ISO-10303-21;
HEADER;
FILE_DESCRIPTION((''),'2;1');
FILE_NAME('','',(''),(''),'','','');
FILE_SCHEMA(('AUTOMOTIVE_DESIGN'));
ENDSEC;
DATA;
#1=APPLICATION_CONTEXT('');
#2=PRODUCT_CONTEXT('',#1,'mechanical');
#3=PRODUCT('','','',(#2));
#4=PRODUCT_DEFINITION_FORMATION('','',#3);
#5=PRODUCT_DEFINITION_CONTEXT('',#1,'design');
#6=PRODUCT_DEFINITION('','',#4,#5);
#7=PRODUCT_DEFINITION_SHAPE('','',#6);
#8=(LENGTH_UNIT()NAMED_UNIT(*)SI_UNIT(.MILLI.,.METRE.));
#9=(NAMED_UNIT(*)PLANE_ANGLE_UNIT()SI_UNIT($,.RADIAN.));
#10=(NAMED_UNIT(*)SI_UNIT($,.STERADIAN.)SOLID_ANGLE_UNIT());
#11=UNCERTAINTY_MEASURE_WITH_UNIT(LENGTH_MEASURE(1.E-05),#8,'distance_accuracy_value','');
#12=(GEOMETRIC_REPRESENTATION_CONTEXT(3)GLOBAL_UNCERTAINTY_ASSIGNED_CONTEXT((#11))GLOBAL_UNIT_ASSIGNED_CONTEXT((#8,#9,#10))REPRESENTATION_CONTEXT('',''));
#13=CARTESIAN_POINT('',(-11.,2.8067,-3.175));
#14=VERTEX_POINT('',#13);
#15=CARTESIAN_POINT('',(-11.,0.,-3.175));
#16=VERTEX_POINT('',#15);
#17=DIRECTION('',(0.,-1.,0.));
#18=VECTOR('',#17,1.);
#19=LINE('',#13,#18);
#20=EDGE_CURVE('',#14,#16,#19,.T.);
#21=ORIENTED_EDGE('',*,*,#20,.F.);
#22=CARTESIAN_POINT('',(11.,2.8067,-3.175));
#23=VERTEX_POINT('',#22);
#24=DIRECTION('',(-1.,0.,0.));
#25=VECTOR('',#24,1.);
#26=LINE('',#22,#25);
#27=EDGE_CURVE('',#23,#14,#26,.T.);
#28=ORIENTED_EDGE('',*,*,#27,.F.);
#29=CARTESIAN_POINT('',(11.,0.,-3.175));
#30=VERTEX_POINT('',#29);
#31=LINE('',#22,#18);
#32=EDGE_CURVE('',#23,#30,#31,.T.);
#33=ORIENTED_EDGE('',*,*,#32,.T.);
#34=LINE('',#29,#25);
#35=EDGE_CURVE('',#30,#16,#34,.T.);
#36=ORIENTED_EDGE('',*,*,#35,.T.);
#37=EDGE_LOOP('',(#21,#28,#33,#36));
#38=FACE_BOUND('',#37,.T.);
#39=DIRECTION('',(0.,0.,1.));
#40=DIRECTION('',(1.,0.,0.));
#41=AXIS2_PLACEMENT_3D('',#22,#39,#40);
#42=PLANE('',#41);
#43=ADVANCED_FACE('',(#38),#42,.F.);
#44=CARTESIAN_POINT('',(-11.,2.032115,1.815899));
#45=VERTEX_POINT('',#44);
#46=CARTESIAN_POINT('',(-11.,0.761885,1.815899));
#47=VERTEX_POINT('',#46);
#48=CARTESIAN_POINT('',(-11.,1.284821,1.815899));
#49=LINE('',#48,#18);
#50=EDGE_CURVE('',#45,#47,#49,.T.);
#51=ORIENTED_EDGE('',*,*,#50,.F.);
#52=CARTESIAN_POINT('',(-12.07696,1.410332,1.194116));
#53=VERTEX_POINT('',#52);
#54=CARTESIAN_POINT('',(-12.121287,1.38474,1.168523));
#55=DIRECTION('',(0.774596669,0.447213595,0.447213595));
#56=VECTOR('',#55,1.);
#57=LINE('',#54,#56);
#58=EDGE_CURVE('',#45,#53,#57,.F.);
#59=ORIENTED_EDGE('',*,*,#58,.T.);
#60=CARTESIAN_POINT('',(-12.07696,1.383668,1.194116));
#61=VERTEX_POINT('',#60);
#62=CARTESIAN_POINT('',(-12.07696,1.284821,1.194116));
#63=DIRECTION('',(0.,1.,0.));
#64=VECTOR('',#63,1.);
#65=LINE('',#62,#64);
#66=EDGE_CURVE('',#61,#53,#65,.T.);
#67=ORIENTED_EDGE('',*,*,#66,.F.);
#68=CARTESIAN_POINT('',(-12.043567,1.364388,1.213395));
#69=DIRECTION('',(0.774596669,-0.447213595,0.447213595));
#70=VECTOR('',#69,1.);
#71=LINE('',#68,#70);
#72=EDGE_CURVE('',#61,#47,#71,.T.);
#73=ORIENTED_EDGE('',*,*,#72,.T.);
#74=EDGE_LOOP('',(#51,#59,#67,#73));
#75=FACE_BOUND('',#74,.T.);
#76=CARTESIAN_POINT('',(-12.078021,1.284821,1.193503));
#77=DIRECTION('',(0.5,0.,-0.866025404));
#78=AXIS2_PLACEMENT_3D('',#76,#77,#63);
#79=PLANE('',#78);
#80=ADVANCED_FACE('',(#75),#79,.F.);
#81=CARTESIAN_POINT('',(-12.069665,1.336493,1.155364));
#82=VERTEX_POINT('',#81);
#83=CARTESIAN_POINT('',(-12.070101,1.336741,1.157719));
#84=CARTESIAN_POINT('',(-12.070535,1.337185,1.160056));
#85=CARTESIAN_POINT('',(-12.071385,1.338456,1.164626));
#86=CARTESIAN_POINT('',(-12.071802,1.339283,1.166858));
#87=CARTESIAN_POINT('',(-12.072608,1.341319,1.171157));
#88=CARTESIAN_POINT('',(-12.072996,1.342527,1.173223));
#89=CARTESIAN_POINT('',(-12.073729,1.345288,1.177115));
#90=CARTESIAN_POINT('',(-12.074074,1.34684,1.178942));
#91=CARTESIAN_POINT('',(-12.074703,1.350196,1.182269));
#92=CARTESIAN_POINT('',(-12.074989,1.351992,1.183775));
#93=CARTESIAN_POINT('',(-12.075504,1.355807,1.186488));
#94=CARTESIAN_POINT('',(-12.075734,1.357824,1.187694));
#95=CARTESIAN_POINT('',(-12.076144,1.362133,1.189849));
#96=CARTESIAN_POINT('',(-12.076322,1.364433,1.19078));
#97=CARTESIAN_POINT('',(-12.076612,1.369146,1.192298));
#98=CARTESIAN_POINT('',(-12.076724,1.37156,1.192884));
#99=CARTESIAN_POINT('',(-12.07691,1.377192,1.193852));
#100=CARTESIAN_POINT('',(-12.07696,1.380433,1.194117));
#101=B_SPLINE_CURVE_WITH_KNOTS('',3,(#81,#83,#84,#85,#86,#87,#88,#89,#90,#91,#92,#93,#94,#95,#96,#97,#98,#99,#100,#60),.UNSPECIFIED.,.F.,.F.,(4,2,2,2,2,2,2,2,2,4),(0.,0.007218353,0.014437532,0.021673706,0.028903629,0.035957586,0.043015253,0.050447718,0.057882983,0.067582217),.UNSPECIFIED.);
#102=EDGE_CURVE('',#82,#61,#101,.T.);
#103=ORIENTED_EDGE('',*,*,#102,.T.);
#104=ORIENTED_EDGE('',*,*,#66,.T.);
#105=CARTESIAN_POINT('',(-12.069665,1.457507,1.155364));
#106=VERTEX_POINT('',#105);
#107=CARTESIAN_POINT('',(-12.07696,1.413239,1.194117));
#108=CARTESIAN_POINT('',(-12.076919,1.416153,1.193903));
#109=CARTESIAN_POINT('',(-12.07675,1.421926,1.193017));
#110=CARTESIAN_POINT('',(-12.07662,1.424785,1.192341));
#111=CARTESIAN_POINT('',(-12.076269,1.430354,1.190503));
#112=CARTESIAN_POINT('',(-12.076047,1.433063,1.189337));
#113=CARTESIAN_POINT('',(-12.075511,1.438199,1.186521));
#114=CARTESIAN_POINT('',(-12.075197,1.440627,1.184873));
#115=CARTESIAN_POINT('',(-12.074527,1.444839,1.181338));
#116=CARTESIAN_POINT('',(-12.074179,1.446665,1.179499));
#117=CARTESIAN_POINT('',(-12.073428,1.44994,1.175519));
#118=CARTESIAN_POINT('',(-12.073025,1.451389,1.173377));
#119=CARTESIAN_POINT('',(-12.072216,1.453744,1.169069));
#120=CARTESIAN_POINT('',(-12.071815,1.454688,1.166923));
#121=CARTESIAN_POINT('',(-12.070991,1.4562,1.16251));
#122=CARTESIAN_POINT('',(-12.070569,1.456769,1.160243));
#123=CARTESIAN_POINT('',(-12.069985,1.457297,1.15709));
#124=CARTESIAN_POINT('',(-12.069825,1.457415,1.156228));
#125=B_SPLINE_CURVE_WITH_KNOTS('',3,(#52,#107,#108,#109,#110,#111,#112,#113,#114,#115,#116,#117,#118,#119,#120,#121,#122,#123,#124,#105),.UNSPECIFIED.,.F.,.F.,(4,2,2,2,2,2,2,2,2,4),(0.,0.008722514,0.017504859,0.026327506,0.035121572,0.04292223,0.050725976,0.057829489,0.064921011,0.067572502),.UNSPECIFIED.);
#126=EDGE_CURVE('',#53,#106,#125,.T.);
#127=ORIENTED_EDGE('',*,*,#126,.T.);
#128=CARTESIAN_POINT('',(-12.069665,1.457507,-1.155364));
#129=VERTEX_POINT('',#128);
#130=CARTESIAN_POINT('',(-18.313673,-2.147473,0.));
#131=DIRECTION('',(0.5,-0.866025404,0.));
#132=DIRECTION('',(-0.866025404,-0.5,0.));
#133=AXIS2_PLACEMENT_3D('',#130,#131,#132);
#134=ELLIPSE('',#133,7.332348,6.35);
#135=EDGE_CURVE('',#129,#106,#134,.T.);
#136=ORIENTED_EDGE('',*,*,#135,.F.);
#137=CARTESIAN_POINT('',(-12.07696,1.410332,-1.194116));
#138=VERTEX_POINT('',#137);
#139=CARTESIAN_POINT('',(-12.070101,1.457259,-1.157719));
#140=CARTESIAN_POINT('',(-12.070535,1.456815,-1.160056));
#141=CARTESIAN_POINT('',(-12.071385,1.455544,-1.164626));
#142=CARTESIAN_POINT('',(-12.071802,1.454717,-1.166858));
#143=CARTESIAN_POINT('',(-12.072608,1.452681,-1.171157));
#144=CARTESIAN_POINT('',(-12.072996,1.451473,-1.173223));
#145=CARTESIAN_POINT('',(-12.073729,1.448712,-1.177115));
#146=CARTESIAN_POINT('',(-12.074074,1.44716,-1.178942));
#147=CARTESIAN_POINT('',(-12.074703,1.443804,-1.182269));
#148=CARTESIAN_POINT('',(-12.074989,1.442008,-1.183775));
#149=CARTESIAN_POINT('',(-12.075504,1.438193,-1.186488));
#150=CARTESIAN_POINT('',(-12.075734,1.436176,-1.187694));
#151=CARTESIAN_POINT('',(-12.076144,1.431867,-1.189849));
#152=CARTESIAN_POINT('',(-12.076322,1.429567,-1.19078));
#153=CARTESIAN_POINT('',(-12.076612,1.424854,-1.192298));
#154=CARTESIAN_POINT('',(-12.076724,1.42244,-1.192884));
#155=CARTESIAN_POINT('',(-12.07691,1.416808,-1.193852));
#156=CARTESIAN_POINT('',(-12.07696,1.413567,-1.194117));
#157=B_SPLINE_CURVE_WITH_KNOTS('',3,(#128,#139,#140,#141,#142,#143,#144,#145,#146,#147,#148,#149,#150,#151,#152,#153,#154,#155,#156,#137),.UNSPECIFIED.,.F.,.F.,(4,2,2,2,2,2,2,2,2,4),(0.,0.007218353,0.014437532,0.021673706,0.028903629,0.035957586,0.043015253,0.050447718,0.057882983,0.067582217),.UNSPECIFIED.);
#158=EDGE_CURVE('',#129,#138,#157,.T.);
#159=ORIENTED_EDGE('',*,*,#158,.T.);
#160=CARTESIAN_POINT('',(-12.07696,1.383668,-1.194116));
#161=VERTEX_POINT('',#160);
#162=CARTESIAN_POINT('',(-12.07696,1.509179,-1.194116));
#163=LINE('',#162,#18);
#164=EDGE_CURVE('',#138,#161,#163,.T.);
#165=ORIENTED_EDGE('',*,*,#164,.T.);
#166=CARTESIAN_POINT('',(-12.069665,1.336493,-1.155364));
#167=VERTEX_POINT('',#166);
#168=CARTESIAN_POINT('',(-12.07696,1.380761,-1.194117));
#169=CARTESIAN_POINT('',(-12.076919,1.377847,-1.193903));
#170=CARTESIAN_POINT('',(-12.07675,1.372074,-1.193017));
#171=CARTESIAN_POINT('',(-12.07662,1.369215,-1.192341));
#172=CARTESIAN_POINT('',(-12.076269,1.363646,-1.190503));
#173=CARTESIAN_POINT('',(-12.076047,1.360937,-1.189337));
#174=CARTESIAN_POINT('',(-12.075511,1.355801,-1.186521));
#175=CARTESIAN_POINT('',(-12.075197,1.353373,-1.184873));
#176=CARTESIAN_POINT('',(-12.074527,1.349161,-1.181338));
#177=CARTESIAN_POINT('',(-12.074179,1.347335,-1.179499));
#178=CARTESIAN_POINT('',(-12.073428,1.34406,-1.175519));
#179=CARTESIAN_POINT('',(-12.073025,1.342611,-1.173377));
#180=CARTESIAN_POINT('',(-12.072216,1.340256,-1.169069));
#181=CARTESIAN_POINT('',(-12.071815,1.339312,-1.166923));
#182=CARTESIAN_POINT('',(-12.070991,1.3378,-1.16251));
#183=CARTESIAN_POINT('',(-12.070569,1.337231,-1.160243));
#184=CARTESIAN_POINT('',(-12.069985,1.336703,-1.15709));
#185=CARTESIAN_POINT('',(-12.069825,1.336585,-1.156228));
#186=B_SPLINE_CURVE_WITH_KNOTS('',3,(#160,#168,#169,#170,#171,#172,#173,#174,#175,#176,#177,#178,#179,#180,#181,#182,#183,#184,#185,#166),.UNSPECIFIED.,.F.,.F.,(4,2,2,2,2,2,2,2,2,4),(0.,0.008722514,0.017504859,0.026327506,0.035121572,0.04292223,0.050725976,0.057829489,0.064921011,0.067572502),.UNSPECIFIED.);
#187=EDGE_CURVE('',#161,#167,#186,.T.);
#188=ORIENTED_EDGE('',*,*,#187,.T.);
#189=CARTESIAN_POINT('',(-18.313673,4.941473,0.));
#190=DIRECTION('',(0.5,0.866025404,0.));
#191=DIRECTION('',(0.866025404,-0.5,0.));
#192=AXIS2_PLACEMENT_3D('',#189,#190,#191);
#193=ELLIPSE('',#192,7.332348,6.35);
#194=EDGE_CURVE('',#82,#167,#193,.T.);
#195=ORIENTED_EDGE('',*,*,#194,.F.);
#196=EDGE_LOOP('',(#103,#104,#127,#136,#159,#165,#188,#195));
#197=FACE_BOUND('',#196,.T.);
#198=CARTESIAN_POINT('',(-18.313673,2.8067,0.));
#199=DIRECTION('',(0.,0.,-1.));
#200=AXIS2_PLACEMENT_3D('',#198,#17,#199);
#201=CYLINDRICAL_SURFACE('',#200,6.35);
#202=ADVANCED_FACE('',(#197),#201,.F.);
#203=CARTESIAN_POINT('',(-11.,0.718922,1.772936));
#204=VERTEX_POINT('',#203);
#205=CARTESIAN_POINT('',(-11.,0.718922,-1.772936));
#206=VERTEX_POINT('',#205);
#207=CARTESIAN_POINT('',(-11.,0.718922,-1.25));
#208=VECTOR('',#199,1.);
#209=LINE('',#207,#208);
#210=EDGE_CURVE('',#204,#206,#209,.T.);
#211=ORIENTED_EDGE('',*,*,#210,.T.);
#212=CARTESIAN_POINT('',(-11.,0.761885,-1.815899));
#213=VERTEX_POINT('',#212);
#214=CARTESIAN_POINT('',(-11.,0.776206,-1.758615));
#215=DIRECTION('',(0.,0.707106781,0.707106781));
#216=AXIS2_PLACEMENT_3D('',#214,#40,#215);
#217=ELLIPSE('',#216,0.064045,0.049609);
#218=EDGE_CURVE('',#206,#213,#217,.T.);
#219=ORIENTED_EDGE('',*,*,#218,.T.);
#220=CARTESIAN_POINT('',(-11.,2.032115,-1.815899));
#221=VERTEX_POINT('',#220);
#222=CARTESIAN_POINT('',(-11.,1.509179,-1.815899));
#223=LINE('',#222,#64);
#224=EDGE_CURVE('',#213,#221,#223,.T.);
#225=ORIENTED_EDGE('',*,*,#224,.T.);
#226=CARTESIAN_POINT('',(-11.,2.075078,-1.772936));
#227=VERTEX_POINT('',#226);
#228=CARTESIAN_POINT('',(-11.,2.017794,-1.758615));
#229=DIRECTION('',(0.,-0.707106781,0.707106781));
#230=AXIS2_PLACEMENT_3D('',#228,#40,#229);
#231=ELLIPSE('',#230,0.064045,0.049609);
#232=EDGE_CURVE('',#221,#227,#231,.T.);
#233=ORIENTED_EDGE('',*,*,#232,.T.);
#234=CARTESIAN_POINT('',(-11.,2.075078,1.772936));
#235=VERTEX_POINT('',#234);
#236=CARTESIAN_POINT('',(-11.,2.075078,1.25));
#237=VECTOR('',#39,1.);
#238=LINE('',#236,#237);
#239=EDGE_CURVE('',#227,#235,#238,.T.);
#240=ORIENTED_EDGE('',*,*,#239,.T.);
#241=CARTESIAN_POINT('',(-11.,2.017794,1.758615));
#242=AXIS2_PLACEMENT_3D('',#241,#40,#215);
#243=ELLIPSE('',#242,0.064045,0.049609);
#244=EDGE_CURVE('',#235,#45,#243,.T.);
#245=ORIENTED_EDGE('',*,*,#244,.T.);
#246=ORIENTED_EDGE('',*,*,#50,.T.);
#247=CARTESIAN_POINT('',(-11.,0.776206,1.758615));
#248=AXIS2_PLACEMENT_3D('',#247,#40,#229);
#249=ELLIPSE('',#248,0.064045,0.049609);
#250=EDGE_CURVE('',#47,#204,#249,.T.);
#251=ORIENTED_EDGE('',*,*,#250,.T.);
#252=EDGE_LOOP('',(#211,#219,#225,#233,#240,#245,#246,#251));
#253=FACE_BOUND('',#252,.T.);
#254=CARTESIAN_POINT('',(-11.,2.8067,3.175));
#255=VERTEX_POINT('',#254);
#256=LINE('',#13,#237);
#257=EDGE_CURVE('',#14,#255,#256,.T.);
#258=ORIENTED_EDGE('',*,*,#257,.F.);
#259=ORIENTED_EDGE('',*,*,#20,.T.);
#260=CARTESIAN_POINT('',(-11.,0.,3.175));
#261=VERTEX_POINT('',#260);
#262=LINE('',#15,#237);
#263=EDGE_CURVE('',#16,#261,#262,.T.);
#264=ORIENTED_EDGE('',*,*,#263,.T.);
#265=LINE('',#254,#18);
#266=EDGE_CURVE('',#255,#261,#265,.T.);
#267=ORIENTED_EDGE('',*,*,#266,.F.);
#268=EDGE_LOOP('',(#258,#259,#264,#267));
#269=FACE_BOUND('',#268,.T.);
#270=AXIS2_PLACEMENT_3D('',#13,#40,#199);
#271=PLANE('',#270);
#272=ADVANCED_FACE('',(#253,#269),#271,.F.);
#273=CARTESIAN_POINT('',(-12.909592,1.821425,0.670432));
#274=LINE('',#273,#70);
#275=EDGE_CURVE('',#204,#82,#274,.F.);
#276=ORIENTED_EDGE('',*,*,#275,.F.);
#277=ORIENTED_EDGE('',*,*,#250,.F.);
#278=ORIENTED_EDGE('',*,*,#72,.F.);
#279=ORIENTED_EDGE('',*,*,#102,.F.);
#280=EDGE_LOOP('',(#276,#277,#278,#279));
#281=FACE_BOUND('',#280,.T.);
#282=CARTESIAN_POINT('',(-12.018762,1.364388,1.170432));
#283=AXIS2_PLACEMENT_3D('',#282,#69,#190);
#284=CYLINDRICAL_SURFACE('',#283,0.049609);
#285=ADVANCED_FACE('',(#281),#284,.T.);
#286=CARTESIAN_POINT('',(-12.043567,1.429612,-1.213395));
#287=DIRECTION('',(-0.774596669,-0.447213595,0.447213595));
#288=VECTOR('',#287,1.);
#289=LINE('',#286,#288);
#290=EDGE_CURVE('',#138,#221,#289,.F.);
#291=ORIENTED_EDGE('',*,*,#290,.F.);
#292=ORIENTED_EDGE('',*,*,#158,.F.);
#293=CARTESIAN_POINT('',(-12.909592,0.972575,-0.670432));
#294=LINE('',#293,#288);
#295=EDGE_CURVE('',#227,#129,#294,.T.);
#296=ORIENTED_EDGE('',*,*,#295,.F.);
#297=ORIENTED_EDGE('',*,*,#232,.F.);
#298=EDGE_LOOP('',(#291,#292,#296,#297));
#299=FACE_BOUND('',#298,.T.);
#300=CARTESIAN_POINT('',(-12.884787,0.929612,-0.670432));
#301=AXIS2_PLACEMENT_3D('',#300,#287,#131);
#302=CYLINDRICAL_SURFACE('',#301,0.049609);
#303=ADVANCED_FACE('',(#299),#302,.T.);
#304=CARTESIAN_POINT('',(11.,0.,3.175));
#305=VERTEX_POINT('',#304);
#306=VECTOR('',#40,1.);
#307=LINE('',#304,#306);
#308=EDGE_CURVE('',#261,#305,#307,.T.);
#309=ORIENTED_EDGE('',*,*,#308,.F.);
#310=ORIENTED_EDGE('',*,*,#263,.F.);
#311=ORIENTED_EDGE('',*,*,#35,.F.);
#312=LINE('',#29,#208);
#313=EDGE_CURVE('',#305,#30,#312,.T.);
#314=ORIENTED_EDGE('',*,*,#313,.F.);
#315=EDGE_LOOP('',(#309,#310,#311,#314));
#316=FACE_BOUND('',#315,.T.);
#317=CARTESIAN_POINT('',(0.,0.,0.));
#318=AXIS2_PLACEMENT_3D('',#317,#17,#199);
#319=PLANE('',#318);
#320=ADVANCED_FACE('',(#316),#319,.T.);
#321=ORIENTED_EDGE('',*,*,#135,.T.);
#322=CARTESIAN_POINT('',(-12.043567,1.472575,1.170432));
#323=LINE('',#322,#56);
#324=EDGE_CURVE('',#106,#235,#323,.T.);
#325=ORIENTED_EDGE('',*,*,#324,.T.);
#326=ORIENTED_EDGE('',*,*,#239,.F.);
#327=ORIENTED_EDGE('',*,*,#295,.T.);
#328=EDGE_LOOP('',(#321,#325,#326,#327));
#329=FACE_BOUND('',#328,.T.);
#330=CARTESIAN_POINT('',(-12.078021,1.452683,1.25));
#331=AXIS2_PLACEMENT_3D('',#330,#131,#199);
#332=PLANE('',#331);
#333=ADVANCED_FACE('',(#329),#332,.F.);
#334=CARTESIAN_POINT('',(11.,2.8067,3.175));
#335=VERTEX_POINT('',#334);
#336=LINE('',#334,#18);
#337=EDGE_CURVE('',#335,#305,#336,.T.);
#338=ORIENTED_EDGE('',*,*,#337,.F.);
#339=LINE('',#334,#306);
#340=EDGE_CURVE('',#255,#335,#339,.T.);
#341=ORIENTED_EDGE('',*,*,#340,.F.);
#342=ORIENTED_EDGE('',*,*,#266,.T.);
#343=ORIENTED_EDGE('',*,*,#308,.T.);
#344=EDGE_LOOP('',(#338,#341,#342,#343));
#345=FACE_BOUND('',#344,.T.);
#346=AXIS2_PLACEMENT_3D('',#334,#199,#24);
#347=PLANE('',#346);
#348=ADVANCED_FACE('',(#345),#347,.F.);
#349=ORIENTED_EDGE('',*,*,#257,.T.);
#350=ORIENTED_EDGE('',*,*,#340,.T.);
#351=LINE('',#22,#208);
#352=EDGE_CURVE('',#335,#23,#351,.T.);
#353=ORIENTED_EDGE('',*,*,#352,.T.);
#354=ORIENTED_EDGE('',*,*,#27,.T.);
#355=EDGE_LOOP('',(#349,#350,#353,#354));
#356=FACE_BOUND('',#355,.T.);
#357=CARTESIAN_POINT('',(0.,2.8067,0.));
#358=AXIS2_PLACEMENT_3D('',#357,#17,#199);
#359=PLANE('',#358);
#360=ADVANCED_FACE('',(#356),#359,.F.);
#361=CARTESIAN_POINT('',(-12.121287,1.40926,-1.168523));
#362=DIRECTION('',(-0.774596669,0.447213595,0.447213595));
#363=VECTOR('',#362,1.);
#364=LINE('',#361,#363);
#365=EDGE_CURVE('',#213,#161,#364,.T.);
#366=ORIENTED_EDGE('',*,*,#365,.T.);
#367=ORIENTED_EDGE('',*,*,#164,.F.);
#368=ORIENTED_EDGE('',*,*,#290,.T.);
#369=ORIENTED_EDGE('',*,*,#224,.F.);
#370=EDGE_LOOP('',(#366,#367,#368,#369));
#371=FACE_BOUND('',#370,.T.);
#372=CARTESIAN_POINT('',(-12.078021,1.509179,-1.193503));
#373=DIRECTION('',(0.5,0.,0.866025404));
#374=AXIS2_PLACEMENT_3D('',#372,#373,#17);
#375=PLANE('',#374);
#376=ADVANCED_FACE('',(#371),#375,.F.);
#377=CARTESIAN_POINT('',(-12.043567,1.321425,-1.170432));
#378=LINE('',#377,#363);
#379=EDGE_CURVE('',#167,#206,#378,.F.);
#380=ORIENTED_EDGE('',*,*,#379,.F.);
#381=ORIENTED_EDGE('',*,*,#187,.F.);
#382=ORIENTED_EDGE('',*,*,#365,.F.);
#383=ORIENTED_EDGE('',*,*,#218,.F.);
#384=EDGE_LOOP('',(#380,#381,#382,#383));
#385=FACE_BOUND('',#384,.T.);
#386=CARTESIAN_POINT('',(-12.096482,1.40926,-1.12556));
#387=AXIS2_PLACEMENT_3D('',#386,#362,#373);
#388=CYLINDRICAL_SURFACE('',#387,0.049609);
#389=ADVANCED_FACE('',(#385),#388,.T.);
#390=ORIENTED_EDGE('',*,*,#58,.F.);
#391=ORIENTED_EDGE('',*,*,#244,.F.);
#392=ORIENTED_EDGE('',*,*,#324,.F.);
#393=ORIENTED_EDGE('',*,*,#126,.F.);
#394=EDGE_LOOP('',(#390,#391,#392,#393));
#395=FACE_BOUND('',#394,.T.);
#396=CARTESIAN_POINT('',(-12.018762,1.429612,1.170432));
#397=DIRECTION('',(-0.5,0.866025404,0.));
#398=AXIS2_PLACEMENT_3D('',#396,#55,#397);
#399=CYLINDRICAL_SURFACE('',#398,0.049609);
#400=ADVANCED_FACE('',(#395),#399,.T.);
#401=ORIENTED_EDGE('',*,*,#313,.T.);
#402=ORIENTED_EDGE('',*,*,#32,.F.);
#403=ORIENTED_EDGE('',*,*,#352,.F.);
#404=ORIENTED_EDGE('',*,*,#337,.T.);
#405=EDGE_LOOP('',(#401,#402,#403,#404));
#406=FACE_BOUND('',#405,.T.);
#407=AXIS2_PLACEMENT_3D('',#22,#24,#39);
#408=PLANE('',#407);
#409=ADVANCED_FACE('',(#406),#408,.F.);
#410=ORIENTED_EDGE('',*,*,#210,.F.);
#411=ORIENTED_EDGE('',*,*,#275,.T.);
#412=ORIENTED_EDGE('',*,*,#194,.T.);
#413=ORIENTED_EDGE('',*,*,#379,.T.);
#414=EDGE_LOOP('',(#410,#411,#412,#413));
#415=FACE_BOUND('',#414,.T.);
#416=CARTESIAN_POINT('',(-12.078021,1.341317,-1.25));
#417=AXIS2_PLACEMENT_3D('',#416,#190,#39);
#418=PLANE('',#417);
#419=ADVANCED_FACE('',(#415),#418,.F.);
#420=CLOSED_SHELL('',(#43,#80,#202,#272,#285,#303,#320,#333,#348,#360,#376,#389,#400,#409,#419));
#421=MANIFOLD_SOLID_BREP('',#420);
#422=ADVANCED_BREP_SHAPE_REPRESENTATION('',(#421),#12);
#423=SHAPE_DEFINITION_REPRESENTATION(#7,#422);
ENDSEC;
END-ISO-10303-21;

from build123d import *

# Parameters (mm, degrees)
CROQUIS1_W              = 22
CROQUIS1_H              = 6.35
SALIENTE_EXTRUIR1_DEPTH = 2.8067
CROQUIS2_W              = 2.5
CROQUIS2_H              = 0.224358974
SALIENTE_EXTRUIR2_DEPTH = 1.07696
SALIENTE_EXTRUIR2_TAPER = 3
REDONDEO1_R             = 0.049609375
CORTAR_EXTRUIR1_DEPTH   = 13.798873245


with BuildPart() as part:
    # Croquis1 → Saliente-Extruir1 (new body)
    with BuildSketch(Plane(origin=(0, 0, 0), x_dir=(1, 0, 0), z_dir=(0, 1, 0))):
        Rectangle(CROQUIS1_W, CROQUIS1_H)
    extrude(amount=SALIENTE_EXTRUIR1_DEPTH)

    # Croquis2 → Saliente-Extruir2 (add)
    with BuildSketch(Plane.ZY.offset(11)):
        with Locations((0, 1.397)):
            Rectangle(CROQUIS2_W, CROQUIS2_H)
    extrude(amount=SALIENTE_EXTRUIR2_DEPTH, taper=SALIENTE_EXTRUIR2_TAPER)

    # Chaflán1: read off the stored shape, not the designer's step
    # Chaflán1: loft between two sections, ruled curve by curve
    chafl_n1_from = [
        Edge.make_line((-12.07696, 1.34070485, -1.194115663), (-12.07696, 1.34070485, 1.194115663)),
        Edge.make_line((-12.07696, 1.34070485, 1.194115663), (-12.07696, 1.45329515, 1.194115663)),
        Edge.make_line((-12.07696, 1.34070485, -1.194115663), (-12.07696, 1.45329515, -1.194115663)),
        Edge.make_line((-12.07696, 1.45329515, 1.194115663), (-12.07696, 1.45329515, -1.194115663)),
    ]
    chafl_n1_to = [
        Edge.make_line((-11, 0.718921704, -1.815898809), (-11, 0.718921704, 1.815898809)),
        Edge.make_line((-11, 0.718921704, 1.815898809), (-11, 2.075078296, 1.815898809)),
        Edge.make_line((-11, 0.718921704, -1.815898809), (-11, 2.075078296, -1.815898809)),
        Edge.make_line((-11, 2.075078296, 1.815898809), (-11, 2.075078296, -1.815898809)),
    ]
    chafl_n1 = Solid(Shell([*[Face.make_surface_from_curves(chafl_n1_from[k], chafl_n1_to[k]) for k in range(4)], Face(Wire(chafl_n1_from)), Face(Wire(chafl_n1_to))]))
    add(chafl_n1)

    # Redondeo1
    redondeo1_edges = [part.edges().sort_by_distance(p)[0] for p in [
        (-11.53848, 1.029813277, 1.505007236),
        (-11.53848, 1.029813277, -1.505007236),
        (-11.53848, 1.764186723, 1.505007236),
        (-11.53848, 1.764186723, -1.505007236),
    ]]
    fillet(redondeo1_edges, radius=REDONDEO1_R)

    # Croquis4 → Cortar-Extruir1 (cut, through all)
    with BuildSketch(Plane.XZ):
        with BuildLine():
            Line((-12.07696, -1.194115663), (-12.07696, 1.194115663))
            ThreePointArc((-12.07696, 1.194115663), (-11.963672899, 0), (-12.07696, -1.194115663))
        make_face()
    extrude(amount=-CORTAR_EXTRUIR1_DEPTH, mode=Mode.SUBTRACT)


solid = part.part
